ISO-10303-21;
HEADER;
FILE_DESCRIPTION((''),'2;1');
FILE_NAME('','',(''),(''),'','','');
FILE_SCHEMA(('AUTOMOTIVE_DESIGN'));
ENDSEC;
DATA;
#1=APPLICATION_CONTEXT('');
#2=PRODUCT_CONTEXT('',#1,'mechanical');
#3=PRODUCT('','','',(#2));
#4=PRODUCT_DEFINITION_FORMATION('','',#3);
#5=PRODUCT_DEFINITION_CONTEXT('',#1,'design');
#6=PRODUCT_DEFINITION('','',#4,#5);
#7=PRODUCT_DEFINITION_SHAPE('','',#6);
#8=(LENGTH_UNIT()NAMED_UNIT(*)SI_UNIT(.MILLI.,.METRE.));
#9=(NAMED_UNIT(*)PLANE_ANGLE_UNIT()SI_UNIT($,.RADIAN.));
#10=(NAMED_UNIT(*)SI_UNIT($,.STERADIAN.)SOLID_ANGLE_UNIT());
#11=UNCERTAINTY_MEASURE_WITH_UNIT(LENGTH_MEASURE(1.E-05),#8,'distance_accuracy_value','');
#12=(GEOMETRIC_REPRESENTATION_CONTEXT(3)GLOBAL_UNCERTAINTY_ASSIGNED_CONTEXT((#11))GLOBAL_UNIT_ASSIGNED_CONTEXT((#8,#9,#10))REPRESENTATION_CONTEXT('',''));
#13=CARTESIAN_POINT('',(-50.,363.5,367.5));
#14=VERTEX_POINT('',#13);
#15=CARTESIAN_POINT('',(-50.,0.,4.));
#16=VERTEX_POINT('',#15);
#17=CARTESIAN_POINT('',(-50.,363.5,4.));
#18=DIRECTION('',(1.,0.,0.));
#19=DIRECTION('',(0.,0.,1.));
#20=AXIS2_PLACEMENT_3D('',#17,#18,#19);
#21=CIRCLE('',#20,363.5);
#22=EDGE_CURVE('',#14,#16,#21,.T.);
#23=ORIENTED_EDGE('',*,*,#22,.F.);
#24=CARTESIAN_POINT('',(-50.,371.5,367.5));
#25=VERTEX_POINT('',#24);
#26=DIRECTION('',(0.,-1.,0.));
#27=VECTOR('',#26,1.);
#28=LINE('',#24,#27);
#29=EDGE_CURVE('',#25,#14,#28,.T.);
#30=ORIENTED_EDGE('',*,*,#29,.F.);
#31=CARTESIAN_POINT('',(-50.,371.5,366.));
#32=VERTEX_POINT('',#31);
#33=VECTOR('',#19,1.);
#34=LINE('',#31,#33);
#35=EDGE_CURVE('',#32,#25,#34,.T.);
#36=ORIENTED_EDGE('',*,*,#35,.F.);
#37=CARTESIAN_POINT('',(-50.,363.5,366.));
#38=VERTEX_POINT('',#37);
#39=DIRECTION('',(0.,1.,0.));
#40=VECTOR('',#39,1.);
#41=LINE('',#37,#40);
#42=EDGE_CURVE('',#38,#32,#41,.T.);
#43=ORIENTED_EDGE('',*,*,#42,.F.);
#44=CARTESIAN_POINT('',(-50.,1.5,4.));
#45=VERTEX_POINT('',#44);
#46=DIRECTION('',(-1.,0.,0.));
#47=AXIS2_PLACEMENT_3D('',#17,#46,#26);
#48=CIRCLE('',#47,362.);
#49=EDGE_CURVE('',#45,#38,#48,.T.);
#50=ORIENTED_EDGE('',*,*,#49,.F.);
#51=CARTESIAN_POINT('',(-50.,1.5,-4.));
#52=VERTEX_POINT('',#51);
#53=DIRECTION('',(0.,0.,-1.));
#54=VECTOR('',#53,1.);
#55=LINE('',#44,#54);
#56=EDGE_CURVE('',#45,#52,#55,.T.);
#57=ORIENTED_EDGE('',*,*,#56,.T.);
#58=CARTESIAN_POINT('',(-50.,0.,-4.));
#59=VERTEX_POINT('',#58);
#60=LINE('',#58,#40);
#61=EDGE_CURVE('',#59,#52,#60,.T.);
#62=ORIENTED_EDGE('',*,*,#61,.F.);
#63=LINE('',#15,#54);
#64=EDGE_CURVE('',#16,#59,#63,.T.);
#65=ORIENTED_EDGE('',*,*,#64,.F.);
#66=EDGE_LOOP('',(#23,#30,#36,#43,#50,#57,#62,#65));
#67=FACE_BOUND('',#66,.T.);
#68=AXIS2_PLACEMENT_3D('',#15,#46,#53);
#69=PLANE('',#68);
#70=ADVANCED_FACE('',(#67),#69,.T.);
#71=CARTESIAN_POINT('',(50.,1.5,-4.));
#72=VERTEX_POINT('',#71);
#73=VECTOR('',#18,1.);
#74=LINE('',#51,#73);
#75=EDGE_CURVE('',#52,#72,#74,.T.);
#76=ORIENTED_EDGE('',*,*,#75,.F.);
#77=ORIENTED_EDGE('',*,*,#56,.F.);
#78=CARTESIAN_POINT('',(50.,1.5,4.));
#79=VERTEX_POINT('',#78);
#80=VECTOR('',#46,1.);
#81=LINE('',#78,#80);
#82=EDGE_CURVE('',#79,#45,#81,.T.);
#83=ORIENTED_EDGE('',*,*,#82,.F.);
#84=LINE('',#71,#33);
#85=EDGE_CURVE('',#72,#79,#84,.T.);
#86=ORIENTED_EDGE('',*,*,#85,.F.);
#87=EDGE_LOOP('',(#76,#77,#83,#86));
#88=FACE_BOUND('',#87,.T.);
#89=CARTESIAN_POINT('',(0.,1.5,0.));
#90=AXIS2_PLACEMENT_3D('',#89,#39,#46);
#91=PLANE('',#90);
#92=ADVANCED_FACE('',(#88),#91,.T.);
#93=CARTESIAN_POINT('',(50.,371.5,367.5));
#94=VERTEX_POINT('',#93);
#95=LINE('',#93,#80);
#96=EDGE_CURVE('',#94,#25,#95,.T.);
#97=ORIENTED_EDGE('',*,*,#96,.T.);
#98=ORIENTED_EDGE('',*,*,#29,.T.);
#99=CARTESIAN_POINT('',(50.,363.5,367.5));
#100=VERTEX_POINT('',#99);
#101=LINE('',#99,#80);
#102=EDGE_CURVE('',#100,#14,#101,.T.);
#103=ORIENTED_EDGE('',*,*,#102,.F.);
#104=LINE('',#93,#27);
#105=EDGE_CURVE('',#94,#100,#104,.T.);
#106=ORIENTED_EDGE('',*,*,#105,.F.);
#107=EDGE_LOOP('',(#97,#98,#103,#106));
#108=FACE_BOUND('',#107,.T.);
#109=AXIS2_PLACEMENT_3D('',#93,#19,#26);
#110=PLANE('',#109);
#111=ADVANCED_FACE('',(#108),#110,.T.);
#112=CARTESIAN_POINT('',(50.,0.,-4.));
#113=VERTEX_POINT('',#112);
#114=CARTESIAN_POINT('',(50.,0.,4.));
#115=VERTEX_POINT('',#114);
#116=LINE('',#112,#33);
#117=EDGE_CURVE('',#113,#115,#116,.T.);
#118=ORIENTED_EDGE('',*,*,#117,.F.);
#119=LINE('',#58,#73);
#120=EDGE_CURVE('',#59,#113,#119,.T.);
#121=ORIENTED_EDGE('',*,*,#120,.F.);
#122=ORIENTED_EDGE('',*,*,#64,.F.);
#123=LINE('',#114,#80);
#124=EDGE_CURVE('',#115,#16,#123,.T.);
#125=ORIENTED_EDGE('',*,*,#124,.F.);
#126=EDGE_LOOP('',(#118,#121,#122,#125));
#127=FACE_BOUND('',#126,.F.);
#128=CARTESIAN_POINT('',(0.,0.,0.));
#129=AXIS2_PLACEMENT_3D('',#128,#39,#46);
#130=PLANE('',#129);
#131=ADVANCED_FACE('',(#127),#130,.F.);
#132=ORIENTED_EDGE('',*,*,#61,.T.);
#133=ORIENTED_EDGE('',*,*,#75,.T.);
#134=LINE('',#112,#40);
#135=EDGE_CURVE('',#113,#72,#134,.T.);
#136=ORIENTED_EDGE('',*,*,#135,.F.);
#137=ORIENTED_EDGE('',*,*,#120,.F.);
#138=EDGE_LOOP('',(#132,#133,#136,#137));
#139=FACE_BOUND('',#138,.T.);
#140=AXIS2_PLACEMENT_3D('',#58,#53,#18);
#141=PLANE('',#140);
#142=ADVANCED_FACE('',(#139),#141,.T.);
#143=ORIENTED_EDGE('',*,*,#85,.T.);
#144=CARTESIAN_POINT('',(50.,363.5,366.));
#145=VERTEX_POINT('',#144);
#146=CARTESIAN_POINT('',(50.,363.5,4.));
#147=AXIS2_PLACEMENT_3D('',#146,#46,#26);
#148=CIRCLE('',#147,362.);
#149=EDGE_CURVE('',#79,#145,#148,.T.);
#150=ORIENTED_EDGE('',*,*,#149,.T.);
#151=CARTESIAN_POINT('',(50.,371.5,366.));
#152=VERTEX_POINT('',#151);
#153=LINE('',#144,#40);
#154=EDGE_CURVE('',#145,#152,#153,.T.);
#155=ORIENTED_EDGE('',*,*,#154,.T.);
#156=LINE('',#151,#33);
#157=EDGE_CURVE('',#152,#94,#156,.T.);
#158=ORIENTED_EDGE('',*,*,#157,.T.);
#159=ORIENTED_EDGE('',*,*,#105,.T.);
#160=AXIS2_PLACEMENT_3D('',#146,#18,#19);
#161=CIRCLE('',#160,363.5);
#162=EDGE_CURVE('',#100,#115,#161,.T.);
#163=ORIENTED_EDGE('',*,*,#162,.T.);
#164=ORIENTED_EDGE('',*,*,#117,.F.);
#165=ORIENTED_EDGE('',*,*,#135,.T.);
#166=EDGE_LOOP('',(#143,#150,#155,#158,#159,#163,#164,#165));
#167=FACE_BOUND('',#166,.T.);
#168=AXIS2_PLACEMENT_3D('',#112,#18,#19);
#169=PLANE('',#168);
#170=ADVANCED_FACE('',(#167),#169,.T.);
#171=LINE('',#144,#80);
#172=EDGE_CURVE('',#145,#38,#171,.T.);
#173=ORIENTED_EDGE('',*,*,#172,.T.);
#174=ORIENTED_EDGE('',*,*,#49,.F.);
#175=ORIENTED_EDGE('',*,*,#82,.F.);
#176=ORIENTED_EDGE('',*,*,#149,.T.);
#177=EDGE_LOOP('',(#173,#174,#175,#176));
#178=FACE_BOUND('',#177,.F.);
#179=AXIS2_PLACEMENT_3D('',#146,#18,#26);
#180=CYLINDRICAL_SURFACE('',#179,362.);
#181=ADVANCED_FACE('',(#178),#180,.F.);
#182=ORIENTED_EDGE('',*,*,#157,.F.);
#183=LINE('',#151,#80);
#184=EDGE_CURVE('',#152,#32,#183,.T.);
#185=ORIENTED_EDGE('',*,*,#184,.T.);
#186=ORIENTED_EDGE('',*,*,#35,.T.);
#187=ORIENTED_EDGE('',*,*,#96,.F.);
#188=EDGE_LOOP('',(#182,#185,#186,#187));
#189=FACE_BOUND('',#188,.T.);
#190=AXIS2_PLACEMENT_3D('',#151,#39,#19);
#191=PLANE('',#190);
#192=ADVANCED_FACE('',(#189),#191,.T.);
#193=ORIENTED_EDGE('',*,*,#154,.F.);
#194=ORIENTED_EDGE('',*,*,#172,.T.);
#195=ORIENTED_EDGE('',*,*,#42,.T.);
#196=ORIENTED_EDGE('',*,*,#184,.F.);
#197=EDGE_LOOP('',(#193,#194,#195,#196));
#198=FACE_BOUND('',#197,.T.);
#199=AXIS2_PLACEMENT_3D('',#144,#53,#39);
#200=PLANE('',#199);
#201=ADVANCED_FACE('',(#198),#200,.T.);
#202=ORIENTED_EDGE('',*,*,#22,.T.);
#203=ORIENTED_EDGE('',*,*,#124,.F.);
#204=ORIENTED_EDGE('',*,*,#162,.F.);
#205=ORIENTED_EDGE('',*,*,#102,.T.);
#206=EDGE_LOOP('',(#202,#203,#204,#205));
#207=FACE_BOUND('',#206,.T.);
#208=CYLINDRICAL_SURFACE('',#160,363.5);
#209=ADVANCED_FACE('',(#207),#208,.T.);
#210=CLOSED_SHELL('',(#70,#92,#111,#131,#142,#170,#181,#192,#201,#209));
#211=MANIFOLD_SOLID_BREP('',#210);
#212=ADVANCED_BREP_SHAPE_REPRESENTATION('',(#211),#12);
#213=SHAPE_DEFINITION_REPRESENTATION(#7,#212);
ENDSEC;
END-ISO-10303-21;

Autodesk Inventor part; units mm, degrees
ref_plane "YZ Plane" through (0, 0, 0) normal (1, 0, 0) x (0, 1, 0)
ref_plane "XZ Plane" through (0, 0, 0) normal (0, 1, 0) x (-1, 0, 0)
ref_plane "XY Plane" through (0, 0, 0) normal (0, 0, 1) x (1, 0, 0)
sketch "Sketch1" plane through (0, 0, 0) normal (0, 1, 0) x (-1, 0, 0)
  line L0 (-50, 4) -> (50, 4)
  line L1 (50, 4) -> (50, -4)
  line L2 (50, -4) -> (-50, -4)
  line L3 (-50, -4) -> (-50, 4)
  line L4 (-50, 4) -> (50, -4) construction
  line L5 (50, 4) -> (-50, -4) construction
  point P0 (0, 0)
  dimension "d0" = 100
  dimension "d1" = 8
extrude "Plate1" add sketch "Sketch1" along normal blind 1.5
sketch "Sketch2" plane through (50, 363.5, 366) normal (0, 0, 1) x (1, 0, 0)
  line L0 (-100, 0) -> (0, 0)
  line L1 (0, 0) -> (0, 8)
  line L2 (0, 8) -> (-100, 8)
  line L3 (-100, 8) -> (-100, 0)
edge flange "Flange1" height 370 angle 90 thickness 1.5 bend radius 362 thickness toward (0, 0, 1) relief tear relief width 1.5 relief depth 0.75 edges at (0, 1.5, 4) wall of the first edge with corners at (-50, 363.5, 366) (50, 363.5, 366) (50, 371.5, 366) (-50, 371.5, 366)
bend "Bend1"
corner "Corner1"
equation "\"d2\" = Thickness"
equation "\"d3\" = BendReliefWidth"
equation "\"d4\" = BendReliefDepth"
equation "\"d5\" = MinimumRemnant"
equation "\"d6\" = TransitionRadius"
equation "\"d10\" = CornerReliefSize"
equation "\"d11\" = GapSize"
equation "\"d12\" = JacobiRadiusSize"
equation "\"BendRadius\" = Thickness"
equation "\"BendReliefWidth\" = Thickness"
equation "\"BendReliefDepth\" = 0.5 * Thickness"
equation "\"CornerReliefSize\" = 4 * Thickness"
equation "\"MinimumRemnant\" = 2 * Thickness"
equation "\"TransitionRadius\" = BendRadius"
equation "\"JacobiRadiusSize\" = BendRadius"
equation "\"GapSize\" = Thickness"
equation "\"Thickness\" = 1.5"
properties part number "CHAPA_8" material "Steel, Mild, Welded"
